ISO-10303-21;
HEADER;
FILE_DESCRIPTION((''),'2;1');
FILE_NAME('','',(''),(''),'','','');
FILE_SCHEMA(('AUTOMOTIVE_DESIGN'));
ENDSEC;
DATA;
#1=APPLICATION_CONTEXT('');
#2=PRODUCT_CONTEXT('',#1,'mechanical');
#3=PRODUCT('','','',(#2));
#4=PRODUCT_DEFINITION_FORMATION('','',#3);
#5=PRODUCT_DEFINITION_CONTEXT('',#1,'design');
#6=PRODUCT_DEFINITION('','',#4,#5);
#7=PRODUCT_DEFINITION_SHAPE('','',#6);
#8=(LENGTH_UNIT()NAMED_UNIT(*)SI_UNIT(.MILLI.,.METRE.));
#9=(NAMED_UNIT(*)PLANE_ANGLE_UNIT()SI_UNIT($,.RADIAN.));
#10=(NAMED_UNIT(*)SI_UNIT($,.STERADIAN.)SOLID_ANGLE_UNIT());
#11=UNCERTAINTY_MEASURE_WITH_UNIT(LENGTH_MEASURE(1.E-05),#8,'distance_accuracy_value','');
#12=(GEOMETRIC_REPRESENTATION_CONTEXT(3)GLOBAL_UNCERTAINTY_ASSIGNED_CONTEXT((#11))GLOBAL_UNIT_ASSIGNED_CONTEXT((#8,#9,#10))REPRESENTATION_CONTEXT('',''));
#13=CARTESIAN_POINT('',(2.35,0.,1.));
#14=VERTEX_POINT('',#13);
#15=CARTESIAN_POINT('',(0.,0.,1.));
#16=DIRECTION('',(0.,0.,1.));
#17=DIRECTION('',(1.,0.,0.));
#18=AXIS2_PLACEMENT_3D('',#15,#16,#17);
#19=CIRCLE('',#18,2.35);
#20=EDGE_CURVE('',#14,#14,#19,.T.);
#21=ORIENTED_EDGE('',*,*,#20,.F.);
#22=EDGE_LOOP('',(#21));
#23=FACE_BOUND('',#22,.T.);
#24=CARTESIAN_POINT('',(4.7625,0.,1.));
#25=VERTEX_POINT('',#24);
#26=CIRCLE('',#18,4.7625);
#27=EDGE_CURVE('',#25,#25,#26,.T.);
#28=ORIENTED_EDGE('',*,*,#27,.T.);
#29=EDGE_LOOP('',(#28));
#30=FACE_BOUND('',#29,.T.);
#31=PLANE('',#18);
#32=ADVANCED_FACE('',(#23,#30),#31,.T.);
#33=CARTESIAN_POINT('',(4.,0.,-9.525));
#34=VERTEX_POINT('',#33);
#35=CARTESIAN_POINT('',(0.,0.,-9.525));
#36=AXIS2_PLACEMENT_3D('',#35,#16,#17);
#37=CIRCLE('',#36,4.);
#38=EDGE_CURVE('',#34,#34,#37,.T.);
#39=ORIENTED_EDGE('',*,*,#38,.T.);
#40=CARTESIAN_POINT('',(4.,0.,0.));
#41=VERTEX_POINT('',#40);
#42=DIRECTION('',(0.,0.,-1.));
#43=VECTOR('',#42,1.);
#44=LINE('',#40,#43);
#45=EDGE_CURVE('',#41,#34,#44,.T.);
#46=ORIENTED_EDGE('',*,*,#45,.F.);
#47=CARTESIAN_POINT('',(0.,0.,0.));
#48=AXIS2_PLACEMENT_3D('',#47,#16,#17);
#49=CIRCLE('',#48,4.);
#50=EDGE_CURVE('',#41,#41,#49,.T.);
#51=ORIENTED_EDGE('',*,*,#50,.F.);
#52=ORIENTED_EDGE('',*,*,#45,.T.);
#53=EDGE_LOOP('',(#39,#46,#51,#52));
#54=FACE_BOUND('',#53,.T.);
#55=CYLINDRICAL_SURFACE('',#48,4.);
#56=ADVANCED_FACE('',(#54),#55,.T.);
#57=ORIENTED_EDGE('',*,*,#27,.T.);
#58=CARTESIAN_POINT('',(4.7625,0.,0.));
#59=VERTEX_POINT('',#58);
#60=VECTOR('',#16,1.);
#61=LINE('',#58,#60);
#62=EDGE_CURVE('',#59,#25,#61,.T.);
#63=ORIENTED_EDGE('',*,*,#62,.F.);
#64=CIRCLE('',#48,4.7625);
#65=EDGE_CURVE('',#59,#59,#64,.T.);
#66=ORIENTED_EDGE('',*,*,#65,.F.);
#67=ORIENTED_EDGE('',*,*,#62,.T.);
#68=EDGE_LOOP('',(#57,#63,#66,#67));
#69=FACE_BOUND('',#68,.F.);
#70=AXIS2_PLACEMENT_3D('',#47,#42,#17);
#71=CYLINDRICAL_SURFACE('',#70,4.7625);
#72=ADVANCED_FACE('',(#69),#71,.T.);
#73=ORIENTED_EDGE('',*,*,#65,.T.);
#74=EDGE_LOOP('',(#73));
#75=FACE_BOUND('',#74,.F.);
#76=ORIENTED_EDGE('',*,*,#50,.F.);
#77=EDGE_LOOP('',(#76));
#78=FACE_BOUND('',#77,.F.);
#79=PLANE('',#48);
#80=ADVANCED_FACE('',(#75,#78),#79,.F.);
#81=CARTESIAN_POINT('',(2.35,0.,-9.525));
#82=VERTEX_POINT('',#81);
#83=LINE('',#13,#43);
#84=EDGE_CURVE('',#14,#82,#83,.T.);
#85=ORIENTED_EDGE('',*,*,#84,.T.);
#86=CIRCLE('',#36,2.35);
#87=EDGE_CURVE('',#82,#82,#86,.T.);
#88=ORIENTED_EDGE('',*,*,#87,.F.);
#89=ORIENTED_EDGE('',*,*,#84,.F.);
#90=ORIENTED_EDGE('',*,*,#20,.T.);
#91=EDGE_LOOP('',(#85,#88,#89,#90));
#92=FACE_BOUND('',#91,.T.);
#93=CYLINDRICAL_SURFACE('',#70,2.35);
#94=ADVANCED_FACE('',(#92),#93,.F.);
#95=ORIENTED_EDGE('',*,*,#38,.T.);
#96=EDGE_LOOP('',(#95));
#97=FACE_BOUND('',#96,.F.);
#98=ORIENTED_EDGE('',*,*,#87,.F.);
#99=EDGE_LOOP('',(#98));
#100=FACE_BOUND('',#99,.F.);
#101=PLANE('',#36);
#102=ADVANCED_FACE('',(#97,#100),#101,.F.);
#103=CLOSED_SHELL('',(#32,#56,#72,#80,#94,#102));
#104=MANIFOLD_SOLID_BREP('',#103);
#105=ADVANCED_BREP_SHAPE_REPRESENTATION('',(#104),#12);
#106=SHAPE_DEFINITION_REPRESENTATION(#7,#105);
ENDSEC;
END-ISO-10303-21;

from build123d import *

# Parameters (mm, degrees)
F0_R     = 4
F0_R_2   = 2.35
F1_DEPTH = 9.525
F0_R_3   = 4.7625
F2_DEPTH = 1


# Not quite as in the source:
# - a length typed as a fraction of an inch, garbled in the dataset ("3 / 203.2 mm" for 3/8 in), is restored


with BuildPart() as f1:
    # F0 (on Top) → F1 (new body)
    with BuildSketch(Plane.XY):
        Circle(F0_R)
        Circle(F0_R_2, mode=Mode.SUBTRACT)
    extrude(amount=-F1_DEPTH)

    # F0 (on Top) → F2 (join)
    with BuildSketch(Plane.XY):
        Circle(F0_R_3)
        Circle(F0_R, mode=Mode.SUBTRACT)
        Circle(F0_R)
        Circle(F0_R_2, mode=Mode.SUBTRACT)
    extrude(amount=F2_DEPTH)


solid = f1.part
